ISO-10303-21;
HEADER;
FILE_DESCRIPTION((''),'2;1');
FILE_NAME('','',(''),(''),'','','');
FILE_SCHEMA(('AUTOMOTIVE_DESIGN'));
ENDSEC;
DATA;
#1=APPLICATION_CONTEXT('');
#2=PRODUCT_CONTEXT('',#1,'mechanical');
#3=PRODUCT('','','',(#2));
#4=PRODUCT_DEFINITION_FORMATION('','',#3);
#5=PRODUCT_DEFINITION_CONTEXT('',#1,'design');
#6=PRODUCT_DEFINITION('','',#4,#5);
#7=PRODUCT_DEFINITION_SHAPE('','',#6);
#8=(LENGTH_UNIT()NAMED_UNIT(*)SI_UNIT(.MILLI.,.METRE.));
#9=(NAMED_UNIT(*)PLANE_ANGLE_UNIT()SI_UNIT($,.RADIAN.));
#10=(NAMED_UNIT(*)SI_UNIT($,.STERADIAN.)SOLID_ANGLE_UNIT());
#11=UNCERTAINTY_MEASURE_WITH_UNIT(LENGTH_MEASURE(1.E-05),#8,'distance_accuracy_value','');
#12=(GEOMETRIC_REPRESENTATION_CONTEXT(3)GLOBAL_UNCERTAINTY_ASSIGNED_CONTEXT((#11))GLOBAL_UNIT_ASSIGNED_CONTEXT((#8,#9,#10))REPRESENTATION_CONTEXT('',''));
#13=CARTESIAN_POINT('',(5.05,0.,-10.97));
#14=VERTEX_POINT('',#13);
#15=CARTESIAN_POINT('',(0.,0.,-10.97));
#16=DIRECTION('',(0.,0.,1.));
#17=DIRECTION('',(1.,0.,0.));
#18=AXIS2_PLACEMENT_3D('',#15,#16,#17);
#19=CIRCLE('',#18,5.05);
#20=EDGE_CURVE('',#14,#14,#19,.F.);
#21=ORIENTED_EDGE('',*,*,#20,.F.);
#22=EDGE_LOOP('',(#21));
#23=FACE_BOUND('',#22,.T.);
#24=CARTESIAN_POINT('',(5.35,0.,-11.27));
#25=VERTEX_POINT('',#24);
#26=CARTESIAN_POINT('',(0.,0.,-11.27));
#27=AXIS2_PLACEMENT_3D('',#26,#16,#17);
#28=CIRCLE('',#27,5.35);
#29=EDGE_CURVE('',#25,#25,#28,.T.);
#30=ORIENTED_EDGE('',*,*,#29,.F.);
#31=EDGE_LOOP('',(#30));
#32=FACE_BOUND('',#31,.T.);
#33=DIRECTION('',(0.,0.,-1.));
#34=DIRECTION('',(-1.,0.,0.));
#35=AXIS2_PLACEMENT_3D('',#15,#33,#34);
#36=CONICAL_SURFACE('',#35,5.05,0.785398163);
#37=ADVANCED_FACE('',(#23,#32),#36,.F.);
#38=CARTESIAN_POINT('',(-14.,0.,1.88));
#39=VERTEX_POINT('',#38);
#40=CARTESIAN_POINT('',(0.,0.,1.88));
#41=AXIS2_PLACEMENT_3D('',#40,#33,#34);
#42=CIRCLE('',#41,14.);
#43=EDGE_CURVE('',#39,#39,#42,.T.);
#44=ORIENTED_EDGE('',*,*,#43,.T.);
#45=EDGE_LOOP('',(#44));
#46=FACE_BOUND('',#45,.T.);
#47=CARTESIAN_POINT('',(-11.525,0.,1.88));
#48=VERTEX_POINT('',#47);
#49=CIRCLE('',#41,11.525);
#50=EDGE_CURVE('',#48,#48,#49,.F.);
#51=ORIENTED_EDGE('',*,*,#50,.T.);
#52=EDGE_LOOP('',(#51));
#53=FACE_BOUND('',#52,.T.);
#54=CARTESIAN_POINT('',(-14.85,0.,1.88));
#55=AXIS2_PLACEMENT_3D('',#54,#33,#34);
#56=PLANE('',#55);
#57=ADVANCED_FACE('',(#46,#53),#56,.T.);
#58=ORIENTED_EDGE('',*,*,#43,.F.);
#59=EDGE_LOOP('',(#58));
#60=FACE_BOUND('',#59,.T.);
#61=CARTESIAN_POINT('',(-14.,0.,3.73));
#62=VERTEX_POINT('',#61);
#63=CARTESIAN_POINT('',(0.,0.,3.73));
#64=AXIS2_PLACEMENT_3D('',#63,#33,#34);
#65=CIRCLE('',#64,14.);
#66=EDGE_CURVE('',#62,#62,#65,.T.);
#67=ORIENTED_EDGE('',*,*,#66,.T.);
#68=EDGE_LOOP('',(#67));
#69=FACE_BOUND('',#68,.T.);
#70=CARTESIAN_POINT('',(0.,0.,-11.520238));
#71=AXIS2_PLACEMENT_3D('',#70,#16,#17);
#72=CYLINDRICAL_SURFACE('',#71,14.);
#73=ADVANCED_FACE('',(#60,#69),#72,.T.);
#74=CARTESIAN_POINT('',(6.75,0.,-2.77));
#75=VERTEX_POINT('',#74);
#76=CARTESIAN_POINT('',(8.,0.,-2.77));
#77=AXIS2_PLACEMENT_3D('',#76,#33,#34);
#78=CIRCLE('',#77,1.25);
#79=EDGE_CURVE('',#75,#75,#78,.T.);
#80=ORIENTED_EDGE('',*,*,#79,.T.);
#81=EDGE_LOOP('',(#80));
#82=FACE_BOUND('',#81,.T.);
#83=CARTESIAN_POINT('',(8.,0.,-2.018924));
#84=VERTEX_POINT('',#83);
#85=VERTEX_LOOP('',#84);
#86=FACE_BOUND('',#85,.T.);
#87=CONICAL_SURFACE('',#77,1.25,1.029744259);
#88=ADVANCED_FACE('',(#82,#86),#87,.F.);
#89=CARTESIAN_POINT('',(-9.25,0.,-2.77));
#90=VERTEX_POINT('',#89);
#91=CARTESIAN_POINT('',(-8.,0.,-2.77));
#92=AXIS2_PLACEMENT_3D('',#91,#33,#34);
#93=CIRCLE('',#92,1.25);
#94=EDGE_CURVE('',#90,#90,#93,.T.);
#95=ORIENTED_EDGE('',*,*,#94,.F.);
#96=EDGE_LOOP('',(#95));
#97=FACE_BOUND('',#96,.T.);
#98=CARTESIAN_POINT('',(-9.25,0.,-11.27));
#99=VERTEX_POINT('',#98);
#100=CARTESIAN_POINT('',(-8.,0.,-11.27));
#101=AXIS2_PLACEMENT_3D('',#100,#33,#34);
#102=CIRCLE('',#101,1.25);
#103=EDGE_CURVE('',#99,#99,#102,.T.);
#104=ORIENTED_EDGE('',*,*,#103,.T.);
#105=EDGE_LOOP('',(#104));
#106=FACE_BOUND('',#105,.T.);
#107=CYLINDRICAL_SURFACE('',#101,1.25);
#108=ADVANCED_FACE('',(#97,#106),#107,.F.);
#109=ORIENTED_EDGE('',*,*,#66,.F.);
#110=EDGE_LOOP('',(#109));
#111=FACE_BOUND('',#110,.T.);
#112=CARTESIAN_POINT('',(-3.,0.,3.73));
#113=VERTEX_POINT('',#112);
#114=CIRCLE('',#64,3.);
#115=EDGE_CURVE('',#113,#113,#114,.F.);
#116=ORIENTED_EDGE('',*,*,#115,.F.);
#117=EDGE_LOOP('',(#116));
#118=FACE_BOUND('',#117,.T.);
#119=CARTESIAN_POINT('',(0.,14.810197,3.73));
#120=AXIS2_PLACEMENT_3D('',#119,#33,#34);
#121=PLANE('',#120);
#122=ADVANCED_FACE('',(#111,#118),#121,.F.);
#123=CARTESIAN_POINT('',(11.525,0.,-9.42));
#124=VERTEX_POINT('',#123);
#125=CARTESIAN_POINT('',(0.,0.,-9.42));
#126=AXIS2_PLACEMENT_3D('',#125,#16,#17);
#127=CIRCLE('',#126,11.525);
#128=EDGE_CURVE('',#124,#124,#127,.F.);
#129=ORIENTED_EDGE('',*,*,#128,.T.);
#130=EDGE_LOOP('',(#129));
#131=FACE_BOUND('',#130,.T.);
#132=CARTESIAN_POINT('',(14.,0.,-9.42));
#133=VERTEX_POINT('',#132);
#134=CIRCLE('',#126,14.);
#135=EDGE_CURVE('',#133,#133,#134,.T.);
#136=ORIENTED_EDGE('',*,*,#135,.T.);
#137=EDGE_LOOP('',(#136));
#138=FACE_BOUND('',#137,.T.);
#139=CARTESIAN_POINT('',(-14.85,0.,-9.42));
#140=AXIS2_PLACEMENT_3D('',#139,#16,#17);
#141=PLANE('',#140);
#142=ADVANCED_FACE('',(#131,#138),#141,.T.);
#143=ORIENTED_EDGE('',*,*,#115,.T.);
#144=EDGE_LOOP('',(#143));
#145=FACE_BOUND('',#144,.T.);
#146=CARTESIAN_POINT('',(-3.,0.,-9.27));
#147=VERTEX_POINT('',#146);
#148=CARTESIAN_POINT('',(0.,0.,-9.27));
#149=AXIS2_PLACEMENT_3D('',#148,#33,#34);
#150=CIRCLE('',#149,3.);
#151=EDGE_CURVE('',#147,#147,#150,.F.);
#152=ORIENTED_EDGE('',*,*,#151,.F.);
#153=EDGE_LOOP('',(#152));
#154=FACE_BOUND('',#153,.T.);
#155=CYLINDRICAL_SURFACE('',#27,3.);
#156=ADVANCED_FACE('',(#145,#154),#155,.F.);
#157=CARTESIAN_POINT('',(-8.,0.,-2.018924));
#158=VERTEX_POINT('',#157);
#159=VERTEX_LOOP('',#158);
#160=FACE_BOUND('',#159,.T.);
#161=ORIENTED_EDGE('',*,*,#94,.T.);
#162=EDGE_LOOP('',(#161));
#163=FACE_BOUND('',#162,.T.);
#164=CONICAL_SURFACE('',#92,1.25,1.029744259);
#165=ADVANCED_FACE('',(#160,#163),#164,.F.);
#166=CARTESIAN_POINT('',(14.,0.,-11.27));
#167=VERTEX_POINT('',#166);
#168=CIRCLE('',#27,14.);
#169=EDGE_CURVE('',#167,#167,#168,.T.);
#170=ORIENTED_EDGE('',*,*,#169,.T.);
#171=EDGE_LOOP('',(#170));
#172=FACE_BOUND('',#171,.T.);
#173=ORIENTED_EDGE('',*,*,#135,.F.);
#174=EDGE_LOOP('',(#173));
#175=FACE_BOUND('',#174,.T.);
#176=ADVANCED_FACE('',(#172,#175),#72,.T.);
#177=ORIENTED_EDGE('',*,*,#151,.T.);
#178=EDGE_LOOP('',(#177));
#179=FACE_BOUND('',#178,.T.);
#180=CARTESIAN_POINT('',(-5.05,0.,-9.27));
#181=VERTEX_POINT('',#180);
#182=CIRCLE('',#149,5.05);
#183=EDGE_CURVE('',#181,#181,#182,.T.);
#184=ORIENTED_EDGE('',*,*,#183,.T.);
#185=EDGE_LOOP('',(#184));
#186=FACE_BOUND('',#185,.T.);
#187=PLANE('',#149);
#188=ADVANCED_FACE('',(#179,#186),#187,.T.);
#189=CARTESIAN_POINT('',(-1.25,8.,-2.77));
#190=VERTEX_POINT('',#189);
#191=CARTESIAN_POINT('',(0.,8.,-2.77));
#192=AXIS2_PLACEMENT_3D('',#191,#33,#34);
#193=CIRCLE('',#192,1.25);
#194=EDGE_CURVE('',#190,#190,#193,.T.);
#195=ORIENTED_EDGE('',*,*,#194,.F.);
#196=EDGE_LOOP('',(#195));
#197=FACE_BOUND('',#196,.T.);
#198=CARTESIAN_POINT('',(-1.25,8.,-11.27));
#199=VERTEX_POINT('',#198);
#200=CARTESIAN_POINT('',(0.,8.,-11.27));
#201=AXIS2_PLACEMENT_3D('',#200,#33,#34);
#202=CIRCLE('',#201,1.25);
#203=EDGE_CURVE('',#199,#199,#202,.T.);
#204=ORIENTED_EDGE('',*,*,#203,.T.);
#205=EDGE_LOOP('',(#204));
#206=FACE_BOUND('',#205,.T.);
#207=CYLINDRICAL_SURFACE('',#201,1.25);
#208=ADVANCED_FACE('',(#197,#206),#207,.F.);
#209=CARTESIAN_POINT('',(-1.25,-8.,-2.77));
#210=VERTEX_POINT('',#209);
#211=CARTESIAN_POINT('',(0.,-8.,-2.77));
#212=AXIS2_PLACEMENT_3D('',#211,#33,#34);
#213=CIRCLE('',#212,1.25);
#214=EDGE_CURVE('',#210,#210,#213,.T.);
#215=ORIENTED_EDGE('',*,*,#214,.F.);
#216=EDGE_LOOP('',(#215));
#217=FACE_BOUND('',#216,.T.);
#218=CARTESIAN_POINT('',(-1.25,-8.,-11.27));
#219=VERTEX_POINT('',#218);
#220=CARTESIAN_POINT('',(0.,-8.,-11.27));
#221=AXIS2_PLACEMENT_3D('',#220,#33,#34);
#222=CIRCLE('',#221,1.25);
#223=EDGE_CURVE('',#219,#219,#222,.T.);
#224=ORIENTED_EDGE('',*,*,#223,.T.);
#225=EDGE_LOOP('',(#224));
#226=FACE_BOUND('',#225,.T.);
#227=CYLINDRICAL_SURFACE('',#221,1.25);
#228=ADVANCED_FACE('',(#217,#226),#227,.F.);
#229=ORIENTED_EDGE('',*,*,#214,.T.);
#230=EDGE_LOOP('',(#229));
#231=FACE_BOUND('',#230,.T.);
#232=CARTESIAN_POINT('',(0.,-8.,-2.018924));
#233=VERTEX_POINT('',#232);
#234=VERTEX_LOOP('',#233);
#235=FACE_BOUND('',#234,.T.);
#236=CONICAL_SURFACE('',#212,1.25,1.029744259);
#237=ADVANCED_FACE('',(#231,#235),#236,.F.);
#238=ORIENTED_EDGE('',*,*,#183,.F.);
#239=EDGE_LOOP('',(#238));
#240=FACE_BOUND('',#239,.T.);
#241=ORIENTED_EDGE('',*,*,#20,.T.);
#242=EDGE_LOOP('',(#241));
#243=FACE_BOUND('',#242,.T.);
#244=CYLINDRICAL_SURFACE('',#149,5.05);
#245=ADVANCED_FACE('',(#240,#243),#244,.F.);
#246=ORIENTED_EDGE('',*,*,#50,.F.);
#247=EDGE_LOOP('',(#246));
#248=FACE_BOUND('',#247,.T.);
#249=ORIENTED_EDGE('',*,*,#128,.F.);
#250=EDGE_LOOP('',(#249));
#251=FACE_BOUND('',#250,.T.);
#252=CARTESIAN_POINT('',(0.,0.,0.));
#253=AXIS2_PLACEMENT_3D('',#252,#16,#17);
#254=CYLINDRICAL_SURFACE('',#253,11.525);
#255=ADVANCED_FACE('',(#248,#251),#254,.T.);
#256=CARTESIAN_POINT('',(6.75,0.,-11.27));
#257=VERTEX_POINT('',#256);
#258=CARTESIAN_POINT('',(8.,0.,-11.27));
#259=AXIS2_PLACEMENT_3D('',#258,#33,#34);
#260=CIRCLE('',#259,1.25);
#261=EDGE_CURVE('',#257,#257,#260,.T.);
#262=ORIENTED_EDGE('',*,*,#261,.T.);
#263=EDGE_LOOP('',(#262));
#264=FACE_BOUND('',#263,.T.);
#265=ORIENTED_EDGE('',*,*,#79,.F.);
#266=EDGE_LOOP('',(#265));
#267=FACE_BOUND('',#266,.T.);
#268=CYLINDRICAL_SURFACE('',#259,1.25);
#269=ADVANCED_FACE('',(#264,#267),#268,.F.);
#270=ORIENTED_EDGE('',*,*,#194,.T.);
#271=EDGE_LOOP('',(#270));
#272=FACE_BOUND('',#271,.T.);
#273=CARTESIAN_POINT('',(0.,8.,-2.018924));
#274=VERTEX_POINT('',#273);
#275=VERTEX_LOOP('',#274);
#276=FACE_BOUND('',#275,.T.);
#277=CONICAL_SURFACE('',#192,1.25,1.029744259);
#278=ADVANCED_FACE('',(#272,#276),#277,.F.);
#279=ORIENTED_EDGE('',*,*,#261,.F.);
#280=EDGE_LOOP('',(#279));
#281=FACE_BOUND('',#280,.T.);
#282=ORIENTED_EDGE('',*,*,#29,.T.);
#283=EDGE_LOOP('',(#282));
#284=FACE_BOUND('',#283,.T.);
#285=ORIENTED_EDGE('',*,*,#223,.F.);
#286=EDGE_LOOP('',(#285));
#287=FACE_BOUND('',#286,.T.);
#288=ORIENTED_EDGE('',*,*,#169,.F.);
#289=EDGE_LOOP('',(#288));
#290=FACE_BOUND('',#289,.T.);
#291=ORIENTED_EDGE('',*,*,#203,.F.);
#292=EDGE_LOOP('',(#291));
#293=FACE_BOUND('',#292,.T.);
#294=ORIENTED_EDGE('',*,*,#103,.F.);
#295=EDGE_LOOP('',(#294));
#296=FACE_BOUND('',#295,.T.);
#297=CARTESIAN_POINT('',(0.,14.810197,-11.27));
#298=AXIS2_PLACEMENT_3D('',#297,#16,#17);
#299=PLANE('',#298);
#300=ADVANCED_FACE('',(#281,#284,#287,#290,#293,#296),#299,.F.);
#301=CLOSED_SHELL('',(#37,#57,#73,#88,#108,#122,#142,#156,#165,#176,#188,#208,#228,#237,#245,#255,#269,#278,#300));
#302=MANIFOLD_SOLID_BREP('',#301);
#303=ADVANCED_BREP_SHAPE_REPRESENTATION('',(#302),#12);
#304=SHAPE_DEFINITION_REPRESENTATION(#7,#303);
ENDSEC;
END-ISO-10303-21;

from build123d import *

# Parameters (mm, degrees)
CIRPATTERN2_COUNT       = 4
CHAMFER1_SIZE           = 0.3
CHAMFER2_SIZE           = 0.15
SKETCH6_R               = 5.05
CUT_EXTRUDE1_DEPTH      = 2
CHAMFER3_SIZE           = 0.3
SKETCH7_R               = 8
CUT_EXTRUDE2_DEPTH      = 6
CUT_EXTRUDE3_DEPTH      = 26.39125592
CUT_EXTRUDE3_DEPTH_BACK = 26.39125592
SKETCH10_R              = 22.04861813
SKETCH10_R_2            = 14


with BuildPart() as part:
    # Cut-Revolve1: read off the stored shape, not the designer's step
    # Cut-Revolve1 outline → Cut-Revolve1 (revolve)
    with BuildSketch(Plane.XZ):
        Polygon((11.525, 2.46), (15, 2.46), (16, 2.765730681), (15.628687935, 3.980237722), (14.810197228, 3.73), (8, 3.73), (8, 9.73), (3, 9.73), (3, -11.27), (14.810197228, -11.27), (15.628687935, -11.520237722), (16, -10.305730681), (15, -10), (11.525, -10), align=None)
    revolve(axis=Axis((0, 0, 0), (0, 0, 1)))

    # Sketch4 → M3 Tapped Hole2 (revolve, cut)
    with BuildSketch(Plane(origin=(0, -8, -11.27), x_dir=(0, 1, 0), z_dir=(1, 0, 0))):
        Polygon((0, 0), (0, 9.251075774), (1.25, 8.5), (1.25, 0), align=None)
    m3_tapped_hole2 = revolve(axis=Axis((0, -8, -17.62), (0, 0, 1)), mode=Mode.SUBTRACT)

    # CirPattern2: M3 Tapped Hole2 ×4 about axis
    cirpattern2_axis = Axis((0, 0, 0), (0, 0, 1))
    for i in range(1, CIRPATTERN2_COUNT):
        add(m3_tapped_hole2.rotate(cirpattern2_axis, i * 360 / CIRPATTERN2_COUNT), mode=Mode.SUBTRACT)

    # Chamfer1
    chamfer1_edges = [part.edges().sort_by_distance(p)[0] for p in [
        (-8, 0, 9.73),
    ]]
    chamfer(chamfer1_edges, length=CHAMFER1_SIZE)

    # Chamfer2
    chamfer2_edges = [part.edges().sort_by_distance(p)[0] for p in [
        (-3, 0, 9.73),
    ]]
    chamfer(chamfer2_edges, length=CHAMFER2_SIZE)

    # Sketch6 → Cut-Extrude1 (cut)
    with BuildSketch(Plane(origin=(0, 0, -11.27), x_dir=(-1, 0, 0), z_dir=(0, 0, -1))):
        Circle(SKETCH6_R)
    extrude(amount=-CUT_EXTRUDE1_DEPTH, mode=Mode.SUBTRACT)

    # Chamfer3
    chamfer3_edges = [part.edges().sort_by_distance(p)[0] for p in [
        (5.05, 0, -11.27),
    ]]
    chamfer(chamfer3_edges, length=CHAMFER3_SIZE)

    # Sketch7 → Cut-Extrude2 (cut)
    with BuildSketch(Plane.XY.offset(9.73)):
        Circle(SKETCH7_R)
    extrude(amount=-CUT_EXTRUDE2_DEPTH, mode=Mode.SUBTRACT)

    # Sketch9 → Revolve1 (revolve)
    with BuildSketch(Plane(origin=(0, 0, 0), x_dir=(1, 0, 0), z_dir=(0, 1, 0))):
        Polygon((-16, 10.305730681), (-14.85, 9.42), (-11.525, 9.42), (-11.525, 10.305730681), align=None)
        Polygon((-16, -2.765730681), (-14.85, -1.88), (-11.525, -1.88), (-11.525, -2.765730681), align=None)
    revolve(axis=Axis((0, 0, -10.305730681), (0, 0, 1)))

    # Sketch10 → Cut-Extrude3 (cut, two sides: drawn at the far end of the back side and taken through both)
    with BuildSketch(Plane.XY.offset(-CUT_EXTRUDE3_DEPTH_BACK)):
        Circle(SKETCH10_R)
        with Locations(Location((0, 0, 0), (0, 0, 180))):
            Circle(SKETCH10_R_2, mode=Mode.SUBTRACT)
    extrude(amount=CUT_EXTRUDE3_DEPTH + CUT_EXTRUDE3_DEPTH_BACK, mode=Mode.SUBTRACT)


solid = part.part
